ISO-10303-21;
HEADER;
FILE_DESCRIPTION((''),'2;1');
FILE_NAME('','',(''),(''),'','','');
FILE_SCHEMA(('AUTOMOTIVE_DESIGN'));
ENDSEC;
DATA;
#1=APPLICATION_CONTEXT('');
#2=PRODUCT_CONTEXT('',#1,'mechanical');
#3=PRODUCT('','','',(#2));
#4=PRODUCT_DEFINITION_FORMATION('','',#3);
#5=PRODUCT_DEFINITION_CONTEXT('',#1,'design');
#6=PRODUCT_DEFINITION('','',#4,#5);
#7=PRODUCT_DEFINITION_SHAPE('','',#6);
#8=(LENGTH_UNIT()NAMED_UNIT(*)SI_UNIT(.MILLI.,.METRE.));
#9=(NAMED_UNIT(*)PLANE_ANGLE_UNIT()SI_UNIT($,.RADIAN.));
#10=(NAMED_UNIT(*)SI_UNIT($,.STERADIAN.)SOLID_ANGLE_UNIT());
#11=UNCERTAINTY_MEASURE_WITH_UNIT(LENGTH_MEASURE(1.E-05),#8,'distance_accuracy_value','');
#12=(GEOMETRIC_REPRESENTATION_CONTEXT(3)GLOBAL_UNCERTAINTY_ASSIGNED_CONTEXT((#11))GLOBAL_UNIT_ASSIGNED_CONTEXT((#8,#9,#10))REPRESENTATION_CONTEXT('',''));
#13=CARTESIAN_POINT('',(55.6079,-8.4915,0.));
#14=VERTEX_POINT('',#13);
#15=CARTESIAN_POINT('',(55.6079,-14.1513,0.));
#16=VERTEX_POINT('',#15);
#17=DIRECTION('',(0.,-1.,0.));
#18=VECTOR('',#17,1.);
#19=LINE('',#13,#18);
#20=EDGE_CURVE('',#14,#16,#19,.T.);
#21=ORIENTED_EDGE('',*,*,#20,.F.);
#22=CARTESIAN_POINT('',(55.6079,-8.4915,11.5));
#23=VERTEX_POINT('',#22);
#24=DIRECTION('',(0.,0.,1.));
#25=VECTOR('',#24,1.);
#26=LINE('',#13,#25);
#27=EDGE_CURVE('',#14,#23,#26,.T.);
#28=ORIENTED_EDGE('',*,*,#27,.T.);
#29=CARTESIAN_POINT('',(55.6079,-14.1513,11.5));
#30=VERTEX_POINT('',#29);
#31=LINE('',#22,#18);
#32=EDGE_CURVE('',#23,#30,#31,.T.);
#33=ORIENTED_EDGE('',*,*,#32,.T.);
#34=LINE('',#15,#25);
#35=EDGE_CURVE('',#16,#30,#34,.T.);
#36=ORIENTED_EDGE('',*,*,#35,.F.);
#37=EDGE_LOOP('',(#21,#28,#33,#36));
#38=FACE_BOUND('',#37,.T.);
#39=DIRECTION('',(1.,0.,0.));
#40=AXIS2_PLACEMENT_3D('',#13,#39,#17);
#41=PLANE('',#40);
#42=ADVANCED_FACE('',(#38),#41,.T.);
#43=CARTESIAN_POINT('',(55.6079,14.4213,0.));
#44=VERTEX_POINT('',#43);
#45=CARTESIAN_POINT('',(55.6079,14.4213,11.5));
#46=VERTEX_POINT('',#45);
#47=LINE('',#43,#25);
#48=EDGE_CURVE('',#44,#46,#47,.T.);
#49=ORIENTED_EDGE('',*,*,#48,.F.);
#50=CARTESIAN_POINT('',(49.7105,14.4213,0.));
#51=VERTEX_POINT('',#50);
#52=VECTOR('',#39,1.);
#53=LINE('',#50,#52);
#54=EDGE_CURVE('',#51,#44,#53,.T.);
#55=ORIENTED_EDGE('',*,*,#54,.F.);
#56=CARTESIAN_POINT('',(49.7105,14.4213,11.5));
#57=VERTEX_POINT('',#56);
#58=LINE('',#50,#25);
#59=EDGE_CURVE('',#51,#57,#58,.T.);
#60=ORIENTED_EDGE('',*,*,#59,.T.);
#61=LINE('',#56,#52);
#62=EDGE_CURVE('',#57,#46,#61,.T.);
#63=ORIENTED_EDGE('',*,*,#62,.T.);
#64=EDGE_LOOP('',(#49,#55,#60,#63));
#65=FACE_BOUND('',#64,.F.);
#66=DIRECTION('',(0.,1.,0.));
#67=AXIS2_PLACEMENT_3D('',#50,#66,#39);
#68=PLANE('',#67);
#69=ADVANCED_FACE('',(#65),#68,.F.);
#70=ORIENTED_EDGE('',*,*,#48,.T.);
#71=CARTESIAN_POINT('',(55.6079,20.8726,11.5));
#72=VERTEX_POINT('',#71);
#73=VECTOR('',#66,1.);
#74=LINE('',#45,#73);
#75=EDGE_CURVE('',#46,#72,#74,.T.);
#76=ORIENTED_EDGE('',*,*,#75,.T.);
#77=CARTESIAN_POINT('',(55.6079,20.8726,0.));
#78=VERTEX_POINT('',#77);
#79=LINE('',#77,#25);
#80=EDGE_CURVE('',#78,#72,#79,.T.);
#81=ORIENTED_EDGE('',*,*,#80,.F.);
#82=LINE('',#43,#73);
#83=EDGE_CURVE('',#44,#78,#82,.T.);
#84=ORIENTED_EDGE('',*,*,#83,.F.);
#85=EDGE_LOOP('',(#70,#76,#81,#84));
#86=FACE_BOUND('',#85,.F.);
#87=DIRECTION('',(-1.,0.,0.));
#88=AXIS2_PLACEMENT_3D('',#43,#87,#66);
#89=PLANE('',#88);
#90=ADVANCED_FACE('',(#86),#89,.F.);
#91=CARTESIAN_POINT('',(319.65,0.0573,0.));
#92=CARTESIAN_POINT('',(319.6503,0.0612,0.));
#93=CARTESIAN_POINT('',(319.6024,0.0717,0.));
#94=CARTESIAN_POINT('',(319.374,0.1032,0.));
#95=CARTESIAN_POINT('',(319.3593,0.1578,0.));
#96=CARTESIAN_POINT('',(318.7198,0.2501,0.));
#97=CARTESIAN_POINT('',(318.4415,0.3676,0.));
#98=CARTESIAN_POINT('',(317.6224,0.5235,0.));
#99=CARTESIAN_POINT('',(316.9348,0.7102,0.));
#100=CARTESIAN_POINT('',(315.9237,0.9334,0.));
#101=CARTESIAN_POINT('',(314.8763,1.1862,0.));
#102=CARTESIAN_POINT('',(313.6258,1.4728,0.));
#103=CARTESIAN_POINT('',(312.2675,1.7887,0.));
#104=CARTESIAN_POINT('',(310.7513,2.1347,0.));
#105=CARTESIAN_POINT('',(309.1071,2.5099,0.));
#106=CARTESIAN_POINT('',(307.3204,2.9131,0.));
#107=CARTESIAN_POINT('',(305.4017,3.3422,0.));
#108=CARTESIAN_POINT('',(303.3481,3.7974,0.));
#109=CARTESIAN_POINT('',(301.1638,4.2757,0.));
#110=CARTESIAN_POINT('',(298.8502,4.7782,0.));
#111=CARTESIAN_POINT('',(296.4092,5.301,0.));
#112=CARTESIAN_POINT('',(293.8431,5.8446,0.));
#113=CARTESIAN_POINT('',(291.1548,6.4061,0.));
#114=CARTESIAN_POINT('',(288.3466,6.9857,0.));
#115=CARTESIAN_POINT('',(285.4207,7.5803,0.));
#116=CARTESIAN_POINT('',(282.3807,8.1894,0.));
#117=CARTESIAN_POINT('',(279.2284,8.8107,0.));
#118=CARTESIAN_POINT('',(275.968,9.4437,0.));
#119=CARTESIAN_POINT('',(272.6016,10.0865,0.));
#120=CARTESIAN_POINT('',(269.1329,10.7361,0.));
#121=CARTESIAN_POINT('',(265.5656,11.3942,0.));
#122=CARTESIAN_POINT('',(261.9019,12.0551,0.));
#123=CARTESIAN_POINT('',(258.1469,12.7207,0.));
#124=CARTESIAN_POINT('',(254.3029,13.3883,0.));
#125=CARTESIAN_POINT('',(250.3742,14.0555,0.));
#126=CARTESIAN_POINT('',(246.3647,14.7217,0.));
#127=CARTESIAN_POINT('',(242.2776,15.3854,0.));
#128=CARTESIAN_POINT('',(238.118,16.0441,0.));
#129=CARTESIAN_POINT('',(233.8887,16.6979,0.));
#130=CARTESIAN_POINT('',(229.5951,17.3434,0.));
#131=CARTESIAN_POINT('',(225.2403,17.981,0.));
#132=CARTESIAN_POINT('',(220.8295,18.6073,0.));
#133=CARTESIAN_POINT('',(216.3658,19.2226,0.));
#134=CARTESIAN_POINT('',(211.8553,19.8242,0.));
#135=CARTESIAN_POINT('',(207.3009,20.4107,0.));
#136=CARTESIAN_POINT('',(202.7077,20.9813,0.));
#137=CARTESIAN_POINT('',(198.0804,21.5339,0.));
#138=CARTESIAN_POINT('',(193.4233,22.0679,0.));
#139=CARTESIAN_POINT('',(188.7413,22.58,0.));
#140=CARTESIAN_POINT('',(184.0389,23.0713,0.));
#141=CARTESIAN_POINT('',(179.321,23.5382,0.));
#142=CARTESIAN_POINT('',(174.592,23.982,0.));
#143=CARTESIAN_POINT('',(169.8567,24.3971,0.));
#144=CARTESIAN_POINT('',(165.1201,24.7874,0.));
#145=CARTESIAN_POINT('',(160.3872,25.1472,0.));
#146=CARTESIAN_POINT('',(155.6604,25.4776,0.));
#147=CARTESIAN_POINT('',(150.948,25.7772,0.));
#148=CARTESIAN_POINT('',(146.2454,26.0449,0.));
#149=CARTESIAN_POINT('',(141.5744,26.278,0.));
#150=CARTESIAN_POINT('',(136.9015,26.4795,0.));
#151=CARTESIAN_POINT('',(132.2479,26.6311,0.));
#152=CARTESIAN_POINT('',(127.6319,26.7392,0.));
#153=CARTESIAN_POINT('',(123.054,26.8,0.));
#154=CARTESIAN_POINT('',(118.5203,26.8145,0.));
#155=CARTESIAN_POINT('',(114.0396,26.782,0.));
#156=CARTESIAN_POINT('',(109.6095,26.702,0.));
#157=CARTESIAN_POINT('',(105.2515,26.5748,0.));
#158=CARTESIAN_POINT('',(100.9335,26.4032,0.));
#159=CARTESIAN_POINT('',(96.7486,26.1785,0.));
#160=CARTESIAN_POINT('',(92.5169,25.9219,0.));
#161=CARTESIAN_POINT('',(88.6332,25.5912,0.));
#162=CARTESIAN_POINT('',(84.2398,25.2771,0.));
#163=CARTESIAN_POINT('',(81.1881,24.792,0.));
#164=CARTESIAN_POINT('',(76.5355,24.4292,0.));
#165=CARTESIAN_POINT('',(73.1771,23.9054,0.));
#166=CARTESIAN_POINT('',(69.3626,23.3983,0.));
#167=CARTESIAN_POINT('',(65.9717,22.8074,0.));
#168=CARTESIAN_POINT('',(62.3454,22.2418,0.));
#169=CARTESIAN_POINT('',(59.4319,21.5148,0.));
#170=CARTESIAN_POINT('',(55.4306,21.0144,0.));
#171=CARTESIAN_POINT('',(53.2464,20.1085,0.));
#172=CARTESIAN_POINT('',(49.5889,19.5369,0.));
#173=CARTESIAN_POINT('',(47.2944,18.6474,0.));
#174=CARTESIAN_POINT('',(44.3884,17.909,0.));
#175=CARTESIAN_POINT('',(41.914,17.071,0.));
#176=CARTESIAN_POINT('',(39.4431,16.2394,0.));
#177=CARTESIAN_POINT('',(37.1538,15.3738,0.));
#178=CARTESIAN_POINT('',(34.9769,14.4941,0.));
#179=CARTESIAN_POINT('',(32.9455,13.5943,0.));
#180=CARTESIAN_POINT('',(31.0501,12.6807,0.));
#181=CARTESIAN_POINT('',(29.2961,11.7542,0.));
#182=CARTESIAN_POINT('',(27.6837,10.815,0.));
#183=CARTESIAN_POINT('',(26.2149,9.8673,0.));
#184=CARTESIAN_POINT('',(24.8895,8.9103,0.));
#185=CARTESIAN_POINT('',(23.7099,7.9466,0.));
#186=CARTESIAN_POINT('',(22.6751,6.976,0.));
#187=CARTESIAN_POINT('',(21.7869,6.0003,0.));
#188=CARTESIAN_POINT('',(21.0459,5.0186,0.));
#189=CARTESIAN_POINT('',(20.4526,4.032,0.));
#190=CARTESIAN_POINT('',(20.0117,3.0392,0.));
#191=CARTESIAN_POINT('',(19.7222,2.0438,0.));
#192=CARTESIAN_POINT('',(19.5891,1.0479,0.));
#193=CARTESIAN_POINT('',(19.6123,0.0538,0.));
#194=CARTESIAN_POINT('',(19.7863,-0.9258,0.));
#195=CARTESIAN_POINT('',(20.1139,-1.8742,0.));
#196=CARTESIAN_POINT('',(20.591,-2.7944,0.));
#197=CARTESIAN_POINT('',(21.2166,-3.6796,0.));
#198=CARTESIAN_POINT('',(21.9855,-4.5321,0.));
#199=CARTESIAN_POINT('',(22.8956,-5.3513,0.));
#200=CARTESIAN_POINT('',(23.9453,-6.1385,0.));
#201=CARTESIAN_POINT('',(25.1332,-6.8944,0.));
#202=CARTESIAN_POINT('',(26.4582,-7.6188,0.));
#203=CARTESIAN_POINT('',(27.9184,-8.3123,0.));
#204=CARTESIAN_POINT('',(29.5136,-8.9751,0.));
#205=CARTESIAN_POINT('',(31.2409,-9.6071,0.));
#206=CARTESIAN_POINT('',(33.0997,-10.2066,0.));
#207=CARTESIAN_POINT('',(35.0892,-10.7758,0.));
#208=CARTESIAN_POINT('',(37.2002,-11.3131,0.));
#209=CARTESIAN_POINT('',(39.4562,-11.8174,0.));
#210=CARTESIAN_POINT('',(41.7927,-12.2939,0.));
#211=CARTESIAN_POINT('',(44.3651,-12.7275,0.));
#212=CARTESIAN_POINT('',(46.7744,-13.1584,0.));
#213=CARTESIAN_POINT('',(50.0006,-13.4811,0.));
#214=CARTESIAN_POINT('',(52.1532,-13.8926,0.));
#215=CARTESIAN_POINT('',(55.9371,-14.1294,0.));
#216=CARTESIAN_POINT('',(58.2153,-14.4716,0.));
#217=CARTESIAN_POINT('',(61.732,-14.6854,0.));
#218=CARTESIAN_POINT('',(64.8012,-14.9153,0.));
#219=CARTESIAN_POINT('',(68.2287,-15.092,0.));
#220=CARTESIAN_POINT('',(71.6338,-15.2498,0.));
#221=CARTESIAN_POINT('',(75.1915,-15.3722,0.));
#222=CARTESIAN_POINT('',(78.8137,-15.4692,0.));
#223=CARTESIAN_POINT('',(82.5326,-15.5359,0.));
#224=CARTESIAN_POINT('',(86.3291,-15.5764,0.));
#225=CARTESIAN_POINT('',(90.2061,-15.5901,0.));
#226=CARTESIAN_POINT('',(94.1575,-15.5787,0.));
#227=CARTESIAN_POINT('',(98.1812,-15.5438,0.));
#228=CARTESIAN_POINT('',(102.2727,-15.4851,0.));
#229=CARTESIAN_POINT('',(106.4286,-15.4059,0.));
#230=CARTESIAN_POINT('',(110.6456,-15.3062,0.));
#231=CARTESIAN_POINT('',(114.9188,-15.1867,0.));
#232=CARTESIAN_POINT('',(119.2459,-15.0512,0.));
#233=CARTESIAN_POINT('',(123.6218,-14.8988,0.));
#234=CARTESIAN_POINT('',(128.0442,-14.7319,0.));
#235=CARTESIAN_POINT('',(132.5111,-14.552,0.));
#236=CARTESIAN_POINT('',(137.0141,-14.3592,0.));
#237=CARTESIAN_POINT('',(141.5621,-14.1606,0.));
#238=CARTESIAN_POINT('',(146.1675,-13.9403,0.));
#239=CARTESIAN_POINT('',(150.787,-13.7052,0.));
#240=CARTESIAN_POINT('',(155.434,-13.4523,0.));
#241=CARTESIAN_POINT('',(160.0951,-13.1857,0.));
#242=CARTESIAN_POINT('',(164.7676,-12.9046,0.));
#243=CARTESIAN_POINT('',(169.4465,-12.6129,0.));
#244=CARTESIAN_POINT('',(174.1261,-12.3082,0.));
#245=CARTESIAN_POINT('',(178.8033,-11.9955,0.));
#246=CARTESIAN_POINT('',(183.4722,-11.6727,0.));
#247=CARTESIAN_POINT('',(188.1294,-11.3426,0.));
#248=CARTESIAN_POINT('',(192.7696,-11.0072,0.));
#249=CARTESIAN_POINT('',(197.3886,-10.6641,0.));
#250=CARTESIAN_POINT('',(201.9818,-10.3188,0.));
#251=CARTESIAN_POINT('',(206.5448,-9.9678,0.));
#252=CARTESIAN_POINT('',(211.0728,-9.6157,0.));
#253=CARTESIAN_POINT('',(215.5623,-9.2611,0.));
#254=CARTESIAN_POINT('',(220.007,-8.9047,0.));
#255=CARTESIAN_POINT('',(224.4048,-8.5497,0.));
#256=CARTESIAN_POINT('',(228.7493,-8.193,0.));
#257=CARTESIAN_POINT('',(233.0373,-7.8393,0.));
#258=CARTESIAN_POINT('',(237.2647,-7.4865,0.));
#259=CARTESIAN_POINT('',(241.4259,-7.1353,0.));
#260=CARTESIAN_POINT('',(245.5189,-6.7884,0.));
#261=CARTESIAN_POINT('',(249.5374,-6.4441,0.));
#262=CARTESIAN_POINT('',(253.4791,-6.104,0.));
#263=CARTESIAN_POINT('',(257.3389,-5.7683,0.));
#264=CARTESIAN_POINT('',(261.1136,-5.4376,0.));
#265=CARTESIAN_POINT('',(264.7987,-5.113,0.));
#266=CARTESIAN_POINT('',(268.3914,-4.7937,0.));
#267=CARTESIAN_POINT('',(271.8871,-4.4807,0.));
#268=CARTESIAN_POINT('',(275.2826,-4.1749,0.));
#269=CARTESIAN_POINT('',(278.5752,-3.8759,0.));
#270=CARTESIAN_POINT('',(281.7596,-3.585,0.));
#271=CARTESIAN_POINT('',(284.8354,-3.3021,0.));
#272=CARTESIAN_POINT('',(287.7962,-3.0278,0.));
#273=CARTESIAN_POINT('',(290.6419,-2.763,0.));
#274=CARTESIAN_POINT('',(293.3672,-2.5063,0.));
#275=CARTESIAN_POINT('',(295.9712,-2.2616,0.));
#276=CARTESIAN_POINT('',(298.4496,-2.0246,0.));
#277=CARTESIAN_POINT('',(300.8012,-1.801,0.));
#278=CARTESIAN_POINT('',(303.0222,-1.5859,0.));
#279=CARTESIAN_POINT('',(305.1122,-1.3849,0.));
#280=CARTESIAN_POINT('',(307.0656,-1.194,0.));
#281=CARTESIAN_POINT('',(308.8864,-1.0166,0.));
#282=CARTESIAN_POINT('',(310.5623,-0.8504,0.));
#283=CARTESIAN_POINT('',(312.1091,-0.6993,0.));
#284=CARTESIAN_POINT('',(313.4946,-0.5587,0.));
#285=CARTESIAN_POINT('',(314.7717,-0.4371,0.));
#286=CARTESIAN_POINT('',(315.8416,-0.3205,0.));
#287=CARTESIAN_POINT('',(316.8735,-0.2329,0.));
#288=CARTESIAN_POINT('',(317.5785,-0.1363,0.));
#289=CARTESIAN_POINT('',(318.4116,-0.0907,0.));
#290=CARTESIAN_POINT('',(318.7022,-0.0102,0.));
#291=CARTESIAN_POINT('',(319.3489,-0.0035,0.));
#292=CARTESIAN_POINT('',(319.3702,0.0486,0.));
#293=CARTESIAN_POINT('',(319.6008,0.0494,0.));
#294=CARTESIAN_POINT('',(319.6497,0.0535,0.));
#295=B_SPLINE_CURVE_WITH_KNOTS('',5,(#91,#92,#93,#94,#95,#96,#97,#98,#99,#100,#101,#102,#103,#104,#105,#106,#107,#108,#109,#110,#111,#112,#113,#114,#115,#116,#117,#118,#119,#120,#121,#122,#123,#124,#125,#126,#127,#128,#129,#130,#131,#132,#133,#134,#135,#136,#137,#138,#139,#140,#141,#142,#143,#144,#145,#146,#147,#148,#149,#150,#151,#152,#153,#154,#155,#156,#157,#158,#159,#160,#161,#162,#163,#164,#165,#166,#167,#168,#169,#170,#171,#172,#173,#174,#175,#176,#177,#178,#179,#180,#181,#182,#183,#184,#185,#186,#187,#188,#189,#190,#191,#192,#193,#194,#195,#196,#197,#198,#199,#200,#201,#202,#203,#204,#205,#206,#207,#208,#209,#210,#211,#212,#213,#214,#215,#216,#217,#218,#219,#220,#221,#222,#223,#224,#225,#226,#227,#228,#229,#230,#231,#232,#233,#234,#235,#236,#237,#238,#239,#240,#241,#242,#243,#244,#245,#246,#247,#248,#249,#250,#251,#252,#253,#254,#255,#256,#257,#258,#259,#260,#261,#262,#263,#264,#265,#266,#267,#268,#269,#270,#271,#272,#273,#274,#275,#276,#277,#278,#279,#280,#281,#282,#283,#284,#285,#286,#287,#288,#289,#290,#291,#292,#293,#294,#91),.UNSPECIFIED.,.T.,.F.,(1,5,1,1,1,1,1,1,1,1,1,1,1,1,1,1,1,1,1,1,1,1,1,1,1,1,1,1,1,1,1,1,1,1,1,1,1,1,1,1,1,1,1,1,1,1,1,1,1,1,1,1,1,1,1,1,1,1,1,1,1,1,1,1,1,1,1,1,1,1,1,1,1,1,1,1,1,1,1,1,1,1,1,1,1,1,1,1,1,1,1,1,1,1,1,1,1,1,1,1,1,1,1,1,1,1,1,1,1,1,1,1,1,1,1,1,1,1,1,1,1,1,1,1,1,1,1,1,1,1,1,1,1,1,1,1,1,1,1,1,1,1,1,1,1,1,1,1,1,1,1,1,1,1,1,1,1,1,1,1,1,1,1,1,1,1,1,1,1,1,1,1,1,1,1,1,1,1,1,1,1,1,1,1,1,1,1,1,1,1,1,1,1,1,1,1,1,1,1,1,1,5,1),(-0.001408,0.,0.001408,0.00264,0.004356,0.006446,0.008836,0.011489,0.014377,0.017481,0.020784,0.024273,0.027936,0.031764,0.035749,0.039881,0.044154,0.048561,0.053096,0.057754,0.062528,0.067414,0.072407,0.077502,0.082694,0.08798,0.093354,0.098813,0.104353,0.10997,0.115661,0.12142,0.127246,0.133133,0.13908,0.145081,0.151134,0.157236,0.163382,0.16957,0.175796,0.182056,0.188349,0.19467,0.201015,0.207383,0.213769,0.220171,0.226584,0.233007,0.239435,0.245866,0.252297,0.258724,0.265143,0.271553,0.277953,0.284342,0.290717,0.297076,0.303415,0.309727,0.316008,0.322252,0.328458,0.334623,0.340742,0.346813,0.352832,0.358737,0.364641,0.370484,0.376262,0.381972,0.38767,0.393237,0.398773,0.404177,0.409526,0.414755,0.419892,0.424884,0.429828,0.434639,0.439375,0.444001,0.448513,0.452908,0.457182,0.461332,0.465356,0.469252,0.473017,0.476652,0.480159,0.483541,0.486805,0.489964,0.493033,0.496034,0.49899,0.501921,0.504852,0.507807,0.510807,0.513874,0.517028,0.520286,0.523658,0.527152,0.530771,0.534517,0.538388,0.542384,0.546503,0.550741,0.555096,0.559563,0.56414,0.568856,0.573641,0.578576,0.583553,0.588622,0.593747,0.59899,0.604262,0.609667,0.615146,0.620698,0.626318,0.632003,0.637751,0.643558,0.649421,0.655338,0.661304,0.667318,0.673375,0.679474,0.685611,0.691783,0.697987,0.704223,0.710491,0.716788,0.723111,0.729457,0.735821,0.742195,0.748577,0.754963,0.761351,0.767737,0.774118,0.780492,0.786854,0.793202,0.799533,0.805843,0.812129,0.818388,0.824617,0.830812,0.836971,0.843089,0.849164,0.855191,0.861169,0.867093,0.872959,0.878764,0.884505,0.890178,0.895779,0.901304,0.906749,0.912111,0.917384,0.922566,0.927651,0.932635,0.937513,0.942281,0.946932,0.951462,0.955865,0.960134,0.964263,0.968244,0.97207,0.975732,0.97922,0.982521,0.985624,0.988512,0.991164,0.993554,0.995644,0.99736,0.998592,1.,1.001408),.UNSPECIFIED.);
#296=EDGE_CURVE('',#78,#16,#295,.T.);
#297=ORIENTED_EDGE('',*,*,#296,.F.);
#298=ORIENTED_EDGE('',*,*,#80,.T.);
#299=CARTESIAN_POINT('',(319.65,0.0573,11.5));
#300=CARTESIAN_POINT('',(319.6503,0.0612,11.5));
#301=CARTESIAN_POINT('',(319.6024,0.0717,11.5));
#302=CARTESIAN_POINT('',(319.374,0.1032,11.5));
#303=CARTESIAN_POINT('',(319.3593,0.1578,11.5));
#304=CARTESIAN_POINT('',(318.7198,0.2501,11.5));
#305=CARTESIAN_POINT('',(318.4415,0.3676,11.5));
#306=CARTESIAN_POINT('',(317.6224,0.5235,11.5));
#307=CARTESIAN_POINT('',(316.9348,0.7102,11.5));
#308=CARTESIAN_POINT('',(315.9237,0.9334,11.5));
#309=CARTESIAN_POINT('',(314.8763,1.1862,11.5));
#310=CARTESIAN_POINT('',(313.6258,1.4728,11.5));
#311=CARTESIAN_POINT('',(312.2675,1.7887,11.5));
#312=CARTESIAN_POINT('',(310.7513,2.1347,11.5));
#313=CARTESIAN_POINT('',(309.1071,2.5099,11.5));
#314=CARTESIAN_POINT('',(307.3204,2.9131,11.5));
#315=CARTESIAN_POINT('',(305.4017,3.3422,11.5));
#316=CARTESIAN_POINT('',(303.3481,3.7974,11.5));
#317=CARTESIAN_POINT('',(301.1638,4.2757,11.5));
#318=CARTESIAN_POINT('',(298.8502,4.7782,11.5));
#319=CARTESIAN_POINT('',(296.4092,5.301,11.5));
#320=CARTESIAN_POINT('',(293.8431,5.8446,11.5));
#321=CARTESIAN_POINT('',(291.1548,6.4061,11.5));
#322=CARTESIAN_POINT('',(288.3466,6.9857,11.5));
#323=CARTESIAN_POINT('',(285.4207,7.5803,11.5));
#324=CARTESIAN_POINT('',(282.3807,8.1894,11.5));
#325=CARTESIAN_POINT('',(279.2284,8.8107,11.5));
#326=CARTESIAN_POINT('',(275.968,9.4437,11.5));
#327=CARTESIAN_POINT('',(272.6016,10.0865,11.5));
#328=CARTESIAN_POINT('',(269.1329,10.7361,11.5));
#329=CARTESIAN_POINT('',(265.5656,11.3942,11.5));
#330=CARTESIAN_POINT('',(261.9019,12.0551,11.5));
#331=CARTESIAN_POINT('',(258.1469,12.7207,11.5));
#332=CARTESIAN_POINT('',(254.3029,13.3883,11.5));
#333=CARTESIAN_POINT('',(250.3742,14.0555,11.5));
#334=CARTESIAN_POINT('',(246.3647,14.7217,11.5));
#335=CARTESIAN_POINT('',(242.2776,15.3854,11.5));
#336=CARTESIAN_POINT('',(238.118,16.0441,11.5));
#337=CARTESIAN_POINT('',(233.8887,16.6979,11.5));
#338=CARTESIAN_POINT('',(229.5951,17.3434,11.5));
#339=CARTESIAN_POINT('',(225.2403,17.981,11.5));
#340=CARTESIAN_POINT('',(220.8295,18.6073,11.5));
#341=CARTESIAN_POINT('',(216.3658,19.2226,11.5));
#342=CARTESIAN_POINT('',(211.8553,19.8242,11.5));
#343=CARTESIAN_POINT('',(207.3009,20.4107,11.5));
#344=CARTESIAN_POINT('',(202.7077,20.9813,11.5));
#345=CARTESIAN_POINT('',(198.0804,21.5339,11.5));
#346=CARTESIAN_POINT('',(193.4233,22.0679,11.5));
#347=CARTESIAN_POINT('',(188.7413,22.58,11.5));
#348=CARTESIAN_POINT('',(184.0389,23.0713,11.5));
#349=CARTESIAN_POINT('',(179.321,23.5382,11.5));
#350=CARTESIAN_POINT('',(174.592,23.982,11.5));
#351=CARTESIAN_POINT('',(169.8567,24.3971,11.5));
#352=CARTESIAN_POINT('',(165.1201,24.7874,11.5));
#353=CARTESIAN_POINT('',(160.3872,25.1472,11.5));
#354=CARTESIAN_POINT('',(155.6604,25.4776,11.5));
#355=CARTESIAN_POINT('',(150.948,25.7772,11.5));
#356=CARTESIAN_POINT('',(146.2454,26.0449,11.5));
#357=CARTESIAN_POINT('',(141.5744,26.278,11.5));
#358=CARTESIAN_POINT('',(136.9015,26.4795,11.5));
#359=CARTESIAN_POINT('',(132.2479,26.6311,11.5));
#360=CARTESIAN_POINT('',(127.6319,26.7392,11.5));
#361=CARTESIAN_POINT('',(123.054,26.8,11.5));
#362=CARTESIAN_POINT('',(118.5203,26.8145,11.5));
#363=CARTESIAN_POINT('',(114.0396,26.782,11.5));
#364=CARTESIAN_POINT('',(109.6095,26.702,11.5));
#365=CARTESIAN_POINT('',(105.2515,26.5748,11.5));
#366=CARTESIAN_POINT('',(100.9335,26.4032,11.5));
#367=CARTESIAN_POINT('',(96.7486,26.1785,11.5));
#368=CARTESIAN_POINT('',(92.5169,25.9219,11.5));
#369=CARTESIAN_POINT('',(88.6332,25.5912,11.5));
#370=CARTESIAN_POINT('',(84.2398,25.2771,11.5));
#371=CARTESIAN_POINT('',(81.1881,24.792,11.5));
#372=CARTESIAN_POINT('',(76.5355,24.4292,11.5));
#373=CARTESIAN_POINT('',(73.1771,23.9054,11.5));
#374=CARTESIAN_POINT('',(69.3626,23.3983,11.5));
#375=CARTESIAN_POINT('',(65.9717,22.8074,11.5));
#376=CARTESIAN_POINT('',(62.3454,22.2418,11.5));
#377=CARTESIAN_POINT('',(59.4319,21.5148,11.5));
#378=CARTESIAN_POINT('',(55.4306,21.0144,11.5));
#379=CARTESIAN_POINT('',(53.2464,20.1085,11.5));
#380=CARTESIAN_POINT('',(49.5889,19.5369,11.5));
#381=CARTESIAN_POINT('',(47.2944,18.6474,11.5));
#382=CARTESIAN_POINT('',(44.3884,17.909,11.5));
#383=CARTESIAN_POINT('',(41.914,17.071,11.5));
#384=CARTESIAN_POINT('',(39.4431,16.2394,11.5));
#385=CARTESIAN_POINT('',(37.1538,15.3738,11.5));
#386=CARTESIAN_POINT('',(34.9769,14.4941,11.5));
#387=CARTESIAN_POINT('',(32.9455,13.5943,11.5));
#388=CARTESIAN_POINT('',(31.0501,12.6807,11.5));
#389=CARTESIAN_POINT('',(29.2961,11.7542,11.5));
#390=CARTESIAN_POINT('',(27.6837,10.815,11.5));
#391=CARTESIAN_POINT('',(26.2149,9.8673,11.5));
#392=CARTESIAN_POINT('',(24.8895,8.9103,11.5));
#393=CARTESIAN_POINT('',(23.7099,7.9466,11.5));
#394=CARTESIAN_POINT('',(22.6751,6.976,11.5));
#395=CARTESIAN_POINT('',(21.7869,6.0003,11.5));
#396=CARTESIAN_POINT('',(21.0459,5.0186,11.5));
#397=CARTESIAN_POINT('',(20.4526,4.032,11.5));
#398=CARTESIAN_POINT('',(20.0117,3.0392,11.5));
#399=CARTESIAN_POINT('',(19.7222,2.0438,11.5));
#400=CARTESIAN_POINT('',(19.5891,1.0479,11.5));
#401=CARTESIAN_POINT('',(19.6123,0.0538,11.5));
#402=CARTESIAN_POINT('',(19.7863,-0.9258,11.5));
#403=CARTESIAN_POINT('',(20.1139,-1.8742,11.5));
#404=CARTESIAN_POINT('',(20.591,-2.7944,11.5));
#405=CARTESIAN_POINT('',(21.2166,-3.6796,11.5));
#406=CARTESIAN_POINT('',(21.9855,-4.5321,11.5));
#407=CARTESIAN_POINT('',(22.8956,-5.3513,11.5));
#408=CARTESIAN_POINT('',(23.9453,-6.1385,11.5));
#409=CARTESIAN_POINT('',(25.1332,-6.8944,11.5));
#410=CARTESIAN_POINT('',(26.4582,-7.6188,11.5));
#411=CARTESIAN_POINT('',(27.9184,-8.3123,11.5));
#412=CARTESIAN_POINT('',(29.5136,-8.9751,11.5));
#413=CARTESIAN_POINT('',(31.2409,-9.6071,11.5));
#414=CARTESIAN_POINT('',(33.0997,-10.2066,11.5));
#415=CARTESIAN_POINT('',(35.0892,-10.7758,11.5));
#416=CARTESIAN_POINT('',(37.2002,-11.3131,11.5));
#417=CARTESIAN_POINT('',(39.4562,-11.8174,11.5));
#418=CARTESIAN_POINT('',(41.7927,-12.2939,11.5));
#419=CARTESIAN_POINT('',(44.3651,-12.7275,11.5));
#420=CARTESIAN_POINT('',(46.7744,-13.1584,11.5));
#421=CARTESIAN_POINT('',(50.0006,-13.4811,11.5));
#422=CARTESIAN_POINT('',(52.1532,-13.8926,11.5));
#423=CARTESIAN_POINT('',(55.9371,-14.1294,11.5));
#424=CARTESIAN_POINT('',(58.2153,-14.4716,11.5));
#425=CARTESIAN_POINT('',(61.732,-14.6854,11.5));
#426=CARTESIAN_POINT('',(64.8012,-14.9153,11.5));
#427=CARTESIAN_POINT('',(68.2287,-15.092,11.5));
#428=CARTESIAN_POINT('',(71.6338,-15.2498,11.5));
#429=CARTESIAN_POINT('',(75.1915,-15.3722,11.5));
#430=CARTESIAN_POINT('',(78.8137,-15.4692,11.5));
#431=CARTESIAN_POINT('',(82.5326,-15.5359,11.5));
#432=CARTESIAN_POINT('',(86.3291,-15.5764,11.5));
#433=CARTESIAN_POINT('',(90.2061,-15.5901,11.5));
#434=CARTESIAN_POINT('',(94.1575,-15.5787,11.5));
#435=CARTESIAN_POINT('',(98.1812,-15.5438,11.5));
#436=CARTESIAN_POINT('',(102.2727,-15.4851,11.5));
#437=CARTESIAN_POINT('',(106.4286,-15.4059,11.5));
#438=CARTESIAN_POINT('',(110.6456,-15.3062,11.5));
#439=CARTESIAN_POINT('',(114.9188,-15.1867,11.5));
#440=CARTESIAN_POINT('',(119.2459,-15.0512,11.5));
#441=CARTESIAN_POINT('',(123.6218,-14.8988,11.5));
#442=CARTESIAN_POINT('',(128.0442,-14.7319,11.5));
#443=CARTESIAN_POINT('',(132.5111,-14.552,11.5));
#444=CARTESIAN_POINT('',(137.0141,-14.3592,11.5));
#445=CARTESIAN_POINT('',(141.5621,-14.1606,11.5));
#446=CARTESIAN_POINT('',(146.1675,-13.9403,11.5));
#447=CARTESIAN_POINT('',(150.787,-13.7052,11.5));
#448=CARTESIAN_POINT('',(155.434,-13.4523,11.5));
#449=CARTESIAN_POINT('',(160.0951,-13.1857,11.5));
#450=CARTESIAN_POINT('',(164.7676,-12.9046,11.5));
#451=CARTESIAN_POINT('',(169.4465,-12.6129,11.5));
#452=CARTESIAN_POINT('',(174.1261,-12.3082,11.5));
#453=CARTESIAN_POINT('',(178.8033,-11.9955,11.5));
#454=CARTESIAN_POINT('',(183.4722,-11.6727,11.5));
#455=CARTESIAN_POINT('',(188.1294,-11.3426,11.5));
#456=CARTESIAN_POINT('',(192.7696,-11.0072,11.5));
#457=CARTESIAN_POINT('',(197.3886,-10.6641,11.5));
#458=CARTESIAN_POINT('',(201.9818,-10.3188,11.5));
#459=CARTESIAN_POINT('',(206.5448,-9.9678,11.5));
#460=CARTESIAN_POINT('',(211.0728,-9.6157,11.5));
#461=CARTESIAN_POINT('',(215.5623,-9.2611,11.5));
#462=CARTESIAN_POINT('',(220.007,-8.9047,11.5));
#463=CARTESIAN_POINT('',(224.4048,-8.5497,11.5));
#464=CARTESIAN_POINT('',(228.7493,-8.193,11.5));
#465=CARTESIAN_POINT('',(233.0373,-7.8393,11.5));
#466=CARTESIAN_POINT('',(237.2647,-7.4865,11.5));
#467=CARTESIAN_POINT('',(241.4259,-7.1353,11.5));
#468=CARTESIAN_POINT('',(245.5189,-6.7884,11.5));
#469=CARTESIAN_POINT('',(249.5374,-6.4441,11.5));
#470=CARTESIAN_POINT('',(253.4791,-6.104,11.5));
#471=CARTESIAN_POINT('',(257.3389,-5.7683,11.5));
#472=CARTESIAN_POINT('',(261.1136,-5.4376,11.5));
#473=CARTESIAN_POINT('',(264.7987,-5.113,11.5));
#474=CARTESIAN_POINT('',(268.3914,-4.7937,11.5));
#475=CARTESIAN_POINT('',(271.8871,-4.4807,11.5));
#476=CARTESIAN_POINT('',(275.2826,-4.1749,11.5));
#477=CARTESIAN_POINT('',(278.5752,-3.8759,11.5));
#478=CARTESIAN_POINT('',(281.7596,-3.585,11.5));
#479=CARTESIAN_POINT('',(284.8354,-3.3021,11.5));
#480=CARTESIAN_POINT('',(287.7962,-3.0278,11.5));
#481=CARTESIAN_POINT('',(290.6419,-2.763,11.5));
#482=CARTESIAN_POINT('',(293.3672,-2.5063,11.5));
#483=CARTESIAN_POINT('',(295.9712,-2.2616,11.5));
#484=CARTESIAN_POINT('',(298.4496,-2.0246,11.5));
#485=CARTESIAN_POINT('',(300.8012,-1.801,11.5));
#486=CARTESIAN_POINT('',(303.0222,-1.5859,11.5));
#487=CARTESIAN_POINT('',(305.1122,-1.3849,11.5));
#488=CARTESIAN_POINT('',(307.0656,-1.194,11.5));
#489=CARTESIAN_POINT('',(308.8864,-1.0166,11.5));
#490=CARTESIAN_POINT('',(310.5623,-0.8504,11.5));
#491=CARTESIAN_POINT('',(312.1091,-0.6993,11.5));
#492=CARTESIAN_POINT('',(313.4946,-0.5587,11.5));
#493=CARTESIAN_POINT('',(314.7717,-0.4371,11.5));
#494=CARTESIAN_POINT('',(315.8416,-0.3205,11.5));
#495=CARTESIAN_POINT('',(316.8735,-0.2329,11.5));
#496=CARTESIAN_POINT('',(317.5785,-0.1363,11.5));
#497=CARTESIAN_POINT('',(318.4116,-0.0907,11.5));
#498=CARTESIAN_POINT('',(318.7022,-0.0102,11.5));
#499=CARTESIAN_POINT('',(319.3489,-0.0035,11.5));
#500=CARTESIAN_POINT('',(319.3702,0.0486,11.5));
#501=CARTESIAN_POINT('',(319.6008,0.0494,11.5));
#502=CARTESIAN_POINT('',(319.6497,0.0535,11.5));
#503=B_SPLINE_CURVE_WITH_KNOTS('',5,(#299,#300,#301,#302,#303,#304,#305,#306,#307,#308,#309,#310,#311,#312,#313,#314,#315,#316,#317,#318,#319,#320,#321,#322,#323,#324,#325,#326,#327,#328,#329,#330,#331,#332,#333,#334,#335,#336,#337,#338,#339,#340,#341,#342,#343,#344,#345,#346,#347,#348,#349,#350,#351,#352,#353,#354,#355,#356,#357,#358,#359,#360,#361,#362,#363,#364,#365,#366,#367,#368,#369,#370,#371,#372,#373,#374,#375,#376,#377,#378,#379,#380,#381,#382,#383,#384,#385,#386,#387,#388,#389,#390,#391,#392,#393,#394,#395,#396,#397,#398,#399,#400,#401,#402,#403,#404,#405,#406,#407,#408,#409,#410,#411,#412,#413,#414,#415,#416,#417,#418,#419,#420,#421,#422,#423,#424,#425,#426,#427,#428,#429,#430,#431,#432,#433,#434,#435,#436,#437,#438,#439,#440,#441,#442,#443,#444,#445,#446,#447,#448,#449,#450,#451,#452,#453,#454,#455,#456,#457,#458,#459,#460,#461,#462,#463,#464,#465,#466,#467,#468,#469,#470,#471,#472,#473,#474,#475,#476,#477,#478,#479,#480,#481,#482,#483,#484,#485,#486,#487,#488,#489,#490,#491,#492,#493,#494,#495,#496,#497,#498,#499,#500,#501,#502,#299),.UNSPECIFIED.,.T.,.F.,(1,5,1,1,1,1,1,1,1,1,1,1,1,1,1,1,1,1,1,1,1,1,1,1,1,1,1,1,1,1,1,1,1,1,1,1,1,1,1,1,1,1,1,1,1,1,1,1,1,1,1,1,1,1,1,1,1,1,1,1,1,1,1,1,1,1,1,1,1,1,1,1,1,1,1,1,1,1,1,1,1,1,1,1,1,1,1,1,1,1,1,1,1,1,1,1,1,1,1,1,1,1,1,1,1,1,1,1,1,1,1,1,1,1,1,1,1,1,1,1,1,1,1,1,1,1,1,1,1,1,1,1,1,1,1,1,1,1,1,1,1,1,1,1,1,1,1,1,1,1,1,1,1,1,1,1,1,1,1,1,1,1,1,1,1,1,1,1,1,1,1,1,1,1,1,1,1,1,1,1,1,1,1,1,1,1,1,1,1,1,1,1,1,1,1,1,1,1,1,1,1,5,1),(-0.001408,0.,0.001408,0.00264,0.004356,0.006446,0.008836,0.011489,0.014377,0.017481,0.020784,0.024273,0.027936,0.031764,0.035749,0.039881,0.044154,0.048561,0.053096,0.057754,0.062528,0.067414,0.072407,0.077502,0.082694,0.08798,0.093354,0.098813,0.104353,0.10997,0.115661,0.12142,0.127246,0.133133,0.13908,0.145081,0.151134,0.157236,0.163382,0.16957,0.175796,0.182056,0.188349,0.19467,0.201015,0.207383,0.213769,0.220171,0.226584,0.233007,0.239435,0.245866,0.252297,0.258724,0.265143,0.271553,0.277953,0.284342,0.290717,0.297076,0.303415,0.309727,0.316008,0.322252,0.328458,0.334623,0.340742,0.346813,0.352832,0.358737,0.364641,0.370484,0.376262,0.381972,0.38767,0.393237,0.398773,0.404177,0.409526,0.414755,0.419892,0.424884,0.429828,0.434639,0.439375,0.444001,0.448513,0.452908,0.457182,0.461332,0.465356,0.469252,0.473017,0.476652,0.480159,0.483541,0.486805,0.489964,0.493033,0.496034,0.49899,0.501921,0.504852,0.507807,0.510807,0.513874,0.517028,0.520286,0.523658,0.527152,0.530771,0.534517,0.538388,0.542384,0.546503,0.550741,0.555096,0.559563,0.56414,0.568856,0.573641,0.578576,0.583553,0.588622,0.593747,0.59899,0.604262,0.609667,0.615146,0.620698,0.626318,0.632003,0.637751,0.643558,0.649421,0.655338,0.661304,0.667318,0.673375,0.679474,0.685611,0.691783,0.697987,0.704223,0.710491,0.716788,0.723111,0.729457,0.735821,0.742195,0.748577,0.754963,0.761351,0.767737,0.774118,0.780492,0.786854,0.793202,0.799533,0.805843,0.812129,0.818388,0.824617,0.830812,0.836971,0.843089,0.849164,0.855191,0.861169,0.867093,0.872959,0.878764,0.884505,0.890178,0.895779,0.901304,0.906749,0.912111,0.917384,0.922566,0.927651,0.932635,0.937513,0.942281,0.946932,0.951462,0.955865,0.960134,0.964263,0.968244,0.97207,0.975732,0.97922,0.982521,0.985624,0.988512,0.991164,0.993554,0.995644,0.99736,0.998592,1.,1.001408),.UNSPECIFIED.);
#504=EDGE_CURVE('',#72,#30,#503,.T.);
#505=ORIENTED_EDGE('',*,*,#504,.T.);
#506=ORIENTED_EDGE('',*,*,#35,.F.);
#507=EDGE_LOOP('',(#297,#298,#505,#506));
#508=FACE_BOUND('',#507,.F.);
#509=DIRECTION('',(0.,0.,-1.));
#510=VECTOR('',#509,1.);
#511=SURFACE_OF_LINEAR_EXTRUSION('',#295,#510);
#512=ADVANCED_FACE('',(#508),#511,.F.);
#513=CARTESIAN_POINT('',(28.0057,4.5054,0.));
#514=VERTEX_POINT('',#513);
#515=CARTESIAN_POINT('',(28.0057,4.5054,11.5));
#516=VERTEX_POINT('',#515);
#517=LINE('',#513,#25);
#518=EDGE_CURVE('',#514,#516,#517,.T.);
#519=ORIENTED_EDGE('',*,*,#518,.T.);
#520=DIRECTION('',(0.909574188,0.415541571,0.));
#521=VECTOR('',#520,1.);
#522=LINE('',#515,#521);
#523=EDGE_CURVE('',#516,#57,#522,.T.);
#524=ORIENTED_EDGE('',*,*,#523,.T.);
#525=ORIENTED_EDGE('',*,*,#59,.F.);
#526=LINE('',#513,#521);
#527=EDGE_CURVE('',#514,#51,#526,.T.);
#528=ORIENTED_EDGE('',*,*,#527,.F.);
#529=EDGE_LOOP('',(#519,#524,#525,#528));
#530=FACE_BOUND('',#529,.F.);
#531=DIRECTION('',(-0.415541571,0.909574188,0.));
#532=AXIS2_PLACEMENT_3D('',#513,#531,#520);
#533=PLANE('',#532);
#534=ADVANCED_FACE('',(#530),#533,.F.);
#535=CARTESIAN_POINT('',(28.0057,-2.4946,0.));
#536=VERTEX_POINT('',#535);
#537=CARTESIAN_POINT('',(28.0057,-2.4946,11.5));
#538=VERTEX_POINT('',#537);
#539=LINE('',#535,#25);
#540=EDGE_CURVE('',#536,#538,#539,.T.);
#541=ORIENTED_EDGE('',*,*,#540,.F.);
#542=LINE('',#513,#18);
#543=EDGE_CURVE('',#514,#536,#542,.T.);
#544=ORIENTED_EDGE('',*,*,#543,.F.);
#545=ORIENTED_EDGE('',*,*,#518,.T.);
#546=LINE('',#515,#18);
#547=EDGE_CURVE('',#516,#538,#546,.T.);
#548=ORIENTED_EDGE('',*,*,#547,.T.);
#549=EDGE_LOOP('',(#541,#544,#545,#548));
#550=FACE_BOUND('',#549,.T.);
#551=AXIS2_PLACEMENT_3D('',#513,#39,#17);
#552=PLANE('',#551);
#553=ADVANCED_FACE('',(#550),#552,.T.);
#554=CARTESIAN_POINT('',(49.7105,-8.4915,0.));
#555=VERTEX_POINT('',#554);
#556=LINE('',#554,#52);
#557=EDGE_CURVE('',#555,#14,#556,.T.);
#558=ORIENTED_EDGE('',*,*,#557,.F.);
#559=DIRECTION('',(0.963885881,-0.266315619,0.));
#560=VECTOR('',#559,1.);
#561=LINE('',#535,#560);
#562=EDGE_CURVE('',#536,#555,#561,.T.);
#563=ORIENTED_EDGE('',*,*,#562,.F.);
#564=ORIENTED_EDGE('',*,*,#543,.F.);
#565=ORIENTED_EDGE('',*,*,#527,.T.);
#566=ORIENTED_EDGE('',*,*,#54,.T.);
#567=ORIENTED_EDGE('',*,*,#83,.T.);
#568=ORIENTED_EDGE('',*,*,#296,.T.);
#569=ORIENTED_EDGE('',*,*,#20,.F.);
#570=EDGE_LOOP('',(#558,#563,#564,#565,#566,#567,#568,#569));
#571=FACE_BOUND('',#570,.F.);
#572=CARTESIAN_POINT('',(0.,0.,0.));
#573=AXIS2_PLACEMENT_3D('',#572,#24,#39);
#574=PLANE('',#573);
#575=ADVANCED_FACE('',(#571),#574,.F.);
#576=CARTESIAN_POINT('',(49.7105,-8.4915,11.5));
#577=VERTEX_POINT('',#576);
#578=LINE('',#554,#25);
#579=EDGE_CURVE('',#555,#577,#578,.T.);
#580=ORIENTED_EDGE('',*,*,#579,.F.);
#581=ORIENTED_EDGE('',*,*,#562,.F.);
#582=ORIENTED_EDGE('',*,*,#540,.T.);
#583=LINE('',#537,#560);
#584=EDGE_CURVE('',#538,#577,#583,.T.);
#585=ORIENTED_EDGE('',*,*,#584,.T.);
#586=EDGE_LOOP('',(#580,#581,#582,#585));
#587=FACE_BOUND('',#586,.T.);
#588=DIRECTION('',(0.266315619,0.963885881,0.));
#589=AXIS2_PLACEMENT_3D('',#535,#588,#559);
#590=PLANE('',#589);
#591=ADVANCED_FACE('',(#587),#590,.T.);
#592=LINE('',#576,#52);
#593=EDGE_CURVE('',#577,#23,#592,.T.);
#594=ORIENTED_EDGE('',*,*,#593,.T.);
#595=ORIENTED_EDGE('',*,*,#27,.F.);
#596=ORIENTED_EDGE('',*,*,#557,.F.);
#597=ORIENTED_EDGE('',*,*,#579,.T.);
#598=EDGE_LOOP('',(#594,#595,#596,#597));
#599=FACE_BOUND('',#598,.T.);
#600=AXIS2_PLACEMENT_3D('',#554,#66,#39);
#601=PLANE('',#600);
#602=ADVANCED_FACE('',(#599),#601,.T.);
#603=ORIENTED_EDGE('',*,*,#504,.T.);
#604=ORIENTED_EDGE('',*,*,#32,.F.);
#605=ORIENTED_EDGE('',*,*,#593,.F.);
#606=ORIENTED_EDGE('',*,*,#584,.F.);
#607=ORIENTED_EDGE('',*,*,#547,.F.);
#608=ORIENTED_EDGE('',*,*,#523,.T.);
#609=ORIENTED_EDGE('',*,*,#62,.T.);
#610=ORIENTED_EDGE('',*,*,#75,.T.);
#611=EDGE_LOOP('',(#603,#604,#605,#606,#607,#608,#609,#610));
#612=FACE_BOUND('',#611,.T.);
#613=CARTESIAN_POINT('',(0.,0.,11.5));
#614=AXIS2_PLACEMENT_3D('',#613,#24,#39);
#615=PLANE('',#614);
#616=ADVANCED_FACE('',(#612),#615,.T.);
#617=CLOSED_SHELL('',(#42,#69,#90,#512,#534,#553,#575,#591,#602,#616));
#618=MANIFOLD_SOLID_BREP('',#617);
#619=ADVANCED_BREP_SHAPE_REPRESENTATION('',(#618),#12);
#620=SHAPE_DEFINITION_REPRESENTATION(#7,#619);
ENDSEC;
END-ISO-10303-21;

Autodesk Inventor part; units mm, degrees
ref_plane "YZ Plane" through (0, 0, 0) normal (1, 0, 0) x (0, 1, 0)
ref_plane "XZ Plane" through (0, 0, 0) normal (0, 1, 0) x (-1, 0, 0)
ref_plane "XY Plane" through (0, 0, 0) normal (0, 0, 1) x (1, 0, 0)
sketch "Sketch2" plane through (0, 0, 0) normal (0, 0, 1) x (1, 0, 0)
  spline S0 degree 5 poles (319.65, 0.0573) (319.6503, 0.0612) (319.6024, 0.0717) (319.374, 0.1032) (319.3593, 0.1578) (318.7198, 0.2501) (318.4415, 0.3676) (317.6224, 0.5235) (316.9348, 0.7102) (315.9237, 0.9334) (314.8763, 1.1862) (313.6258, 1.4728) (312.2675, 1.7887) (310.7513, 2.1347) (309.1071, 2.5099) (307.3204, 2.9131) (305.4017, 3.3422) (303.3481, 3.7974) (301.1638, 4.2757) (298.8502, 4.7782) (296.4092, 5.301) (293.8431, 5.8446) (291.1548, 6.4061) (288.3466, 6.9857) (285.4207, 7.5803) (282.3807, 8.1894) (279.2284, 8.8107) (275.968, 9.4437) (272.6016, 10.0865) (269.1329, 10.7361) (265.5656, 11.3942) (261.9019, 12.0551) (258.1469, 12.7207) (254.3029, 13.3883) (250.3742, 14.0555) (246.3647, 14.7217) (242.2776, 15.3854) (238.118, 16.0441) (233.8887, 16.6979) (229.5951, 17.3434) (225.2403, 17.981) (220.8295, 18.6073) (216.3658, 19.2226) (211.8553, 19.8242) (207.3009, 20.4107) (202.7077, 20.9813) (198.0804, 21.5339) (193.4233, 22.0679) (188.7413, 22.58) (184.0389, 23.0713) (179.321, 23.5382) (174.592, 23.982) (169.8567, 24.3971) (165.1201, 24.7874) (160.3872, 25.1472) (155.6604, 25.4776) (150.948, 25.7772) (146.2454, 26.0449) (141.5744, 26.278) (136.9015, 26.4795) (132.2479, 26.6311) (127.6319, 26.7392) (123.054, 26.8) (118.5203, 26.8145) (114.0396, 26.782) (109.6095, 26.702) (105.2515, 26.5748) (100.9335, 26.4032) (96.7486, 26.1785) (92.5169, 25.9219) (88.6332, 25.5912) (84.2398, 25.2771) (81.1881, 24.792) (76.5355, 24.4292) (73.1771, 23.9054) (69.3626, 23.3983) (65.9717, 22.8074) (62.3454, 22.2418) (59.4319, 21.5148) (55.4306, 21.0144) (53.2464, 20.1085) (49.5889, 19.5369) (47.2944, 18.6474) (44.3884, 17.909) (41.914, 17.071) (39.4431, 16.2394) (37.1538, 15.3738) (34.9769, 14.4941) (32.9455, 13.5943) (31.0501, 12.6807) (29.2961, 11.7542) (27.6837, 10.815) (26.2149, 9.8673) (24.8895, 8.9103) (23.7099, 7.9466) (22.6751, 6.976) (21.7869, 6.0003) (21.0459, 5.0186) (20.4526, 4.032) (20.0117, 3.0392) (19.7222, 2.0438) (19.5891, 1.0479) (19.6123, 0.0538) (19.7863, -0.9258) (20.1139, -1.8742) (20.591, -2.7944) (21.2166, -3.6796) (21.9855, -4.5321) (22.8956, -5.3513) (23.9453, -6.1385) (25.1332, -6.8944) (26.4582, -7.6188) (27.9184, -8.3123) (29.5136, -8.9751) (31.2409, -9.6071) (33.0997, -10.2066) (35.0892, -10.7758) (37.2002, -11.3131) (39.4562, -11.8174) (41.7927, -12.2939) (44.3651, -12.7275) (46.7744, -13.1584) (50.0006, -13.4811) (52.1532, -13.8926) (55.9371, -14.1294) (58.2153, -14.4716) (61.732, -14.6854) (64.8012, -14.9153) (68.2287, -15.092) (71.6338, -15.2498) (75.1915, -15.3722) (78.8137, -15.4692) (82.5326, -15.5359) (86.3291, -15.5764) (90.2061, -15.5901) (94.1575, -15.5787) (98.1812, -15.5438) (102.2727, -15.4851) (106.4286, -15.4059) (110.6456, -15.3062) (114.9188, -15.1867) (119.2459, -15.0512) (123.6218, -14.8988) (128.0442, -14.7319) (132.5111, -14.552) (137.0141, -14.3592) (141.5621, -14.1606) (146.1675, -13.9403) (150.787, -13.7052) (155.434, -13.4523) (160.0951, -13.1857) (164.7676, -12.9046) (169.4465, -12.6129) (174.1261, -12.3082) (178.8033, -11.9955) (183.4722, -11.6727) (188.1294, -11.3426) (192.7696, -11.0072) (197.3886, -10.6641) (201.9818, -10.3188) (206.5448, -9.9678) (211.0728, -9.6157) (215.5623, -9.2611) (220.007, -8.9047) (224.4048, -8.5497) (228.7493, -8.193) (233.0373, -7.8393) (237.2647, -7.4865) (241.4259, -7.1353) (245.5189, -6.7884) (249.5374, -6.4441) (253.4791, -6.104) (257.3389, -5.7683) (261.1136, -5.4376) (264.7987, -5.113) (268.3914, -4.7937) (271.8871, -4.4807) (275.2826, -4.1749) (278.5752, -3.8759) (281.7596, -3.585) (284.8354, -3.3021) (287.7962, -3.0278) (290.6419, -2.763) (293.3672, -2.5063) (295.9712, -2.2616) (298.4496, -2.0246) (300.8012, -1.801) (303.0222, -1.5859) (305.1122, -1.3849) (307.0656, -1.194) (308.8864, -1.0166) (310.5623, -0.8504) (312.1091, -0.6993) (313.4946, -0.5587) (314.7717, -0.4371) (315.8416, -0.3205) (316.8735, -0.2329) (317.5785, -0.1363) (318.4116, -0.0907) (318.7022, -0.0102) (319.3489, -0.0035) (319.3702, 0.0486) (319.6008, 0.0494) (319.6497, 0.0535) (319.65, 0.0573) knots 0 0 0 0 0 0 0.001408 0.00264 0.004356 0.006446 0.008836 0.011489 0.014377 0.017481 0.020784 0.024273 0.027936 0.031764 0.035749 0.039881 0.044154 0.048561 0.053096 0.057754 0.062528 0.067414 0.072407 0.077502 0.082694 0.08798 0.093354 0.098813 0.104353 0.10997 0.115661 0.12142 0.127246 0.133133 0.13908 0.145081 0.151134 0.157236 0.163382 0.16957 0.175796 0.182056 0.188349 0.19467 0.201015 0.207383 0.213769 0.220171 0.226584 0.233007 0.239435 0.245866 0.252297 0.258724 0.265143 0.271553 0.277953 0.284342 0.290717 0.297076 0.303415 0.309727 0.316008 0.322252 0.328458 0.334623 0.340742 0.346813 0.352832 0.358737 0.364641 0.370484 0.376262 0.381972 0.38767 0.393237 0.398773 0.404177 0.409526 0.414755 0.419892 0.424884 0.429828 0.434639 0.439375 0.444001 0.448513 0.452908 0.457182 0.461332 0.465356 0.469252 0.473017 0.476652 0.480159 0.483541 0.486805 0.489964 0.493033 0.496034 0.49899 0.501921 0.504852 0.507807 0.510807 0.513874 0.517028 0.520286 0.523658 0.527152 0.530771 0.534517 0.538388 0.542384 0.546503 0.550741 0.555096 0.559563 0.56414 0.568856 0.573641 0.578576 0.583553 0.588622 0.593747 0.59899 0.604262 0.609667 0.615146 0.620698 0.626318 0.632003 0.637751 0.643558 0.649421 0.655338 0.661304 0.667318 0.673375 0.679474 0.685611 0.691783 0.697987 0.704223 0.710491 0.716788 0.723111 0.729457 0.735821 0.742195 0.748577 0.754963 0.761351 0.767737 0.774118 0.780492 0.786854 0.793202 0.799533 0.805843 0.812129 0.818388 0.824617 0.830812 0.836971 0.843089 0.849164 0.855191 0.861169 0.867093 0.872959 0.878764 0.884505 0.890178 0.895779 0.901304 0.906749 0.912111 0.917384 0.922566 0.927651 0.932635 0.937513 0.942281 0.946932 0.951462 0.955865 0.960134 0.964263 0.968244 0.97207 0.975732 0.97922 0.982521 0.985624 0.988512 0.991164 0.993554 0.995644 0.99736 0.998592 1 1 1 1 1 1
  circle A0 centre (80.6499, 4.6494) radius 14
  line L0 (80.6499, 4.6494) -> (80.6499, 24.7974) construction
  circle A1 centre (209.65, 4.6494) radius 4.2
  line L1 (80.6499, 4.6494) -> (209.65, 4.6494) construction
  line L2 (319.65, 0.0573) -> (219.65, 0.0573) construction
  line L3 (219.65, 18.7671) -> (219.65, -8.9327) construction
  line L4 (28.0057, 4.5054) -> (28.0057, -2.4946)
  line L5 (19.6271, 1.0326) -> (319.65, 0.0573) construction
  line L6 (49.7105, 14.4213) -> (55.6079, 14.4213)
  line L7 (49.7105, -8.4915) -> (55.6079, -8.4915)
  line L8 (28.0057, 4.5054) -> (49.7105, 14.4213)
  line L9 (28.0057, -2.4946) -> (49.7105, -8.4915)
  line L10 (55.6079, 14.4213) -> (55.6079, 20.8726)
  line L11 (55.6079, -8.4915) -> (55.6079, -14.1513)
  point P0 (0, 0)
  point P1 (319.3571, 0.1272)
  point P2 (318.9917, 0.2142)
  point P3 (318.4802, 0.3354)
  point P4 (317.8238, 0.4911)
  point P5 (317.0222, 0.6801)
  point P6 (316.0769, 0.9024)
  point P7 (314.9885, 1.1568)
  point P8 (313.7582, 1.443)
  point P9 (312.3866, 1.7598)
  point P10 (310.8752, 2.1063)
  point P11 (309.2258, 2.4819)
  point P12 (307.4393, 2.8854)
  point P13 (305.5178, 3.3153)
  point P14 (303.4628, 3.7707)
  point P15 (301.2764, 4.2501)
  point P16 (298.9607, 4.7526)
  point P17 (296.5175, 5.2764)
  point P18 (293.9492, 5.8203)
  point P19 (291.2585, 6.3828)
  point P20 (288.4478, 6.9627)
  point P21 (285.5195, 7.5582)
  point P22 (282.4766, 8.1678)
  point P23 (279.3218, 8.79)
  point P24 (276.0584, 9.4236)
  point P25 (272.6891, 10.0668)
  point P26 (269.2175, 10.7178)
  point P27 (265.6469, 11.3757)
  point P28 (261.9803, 12.0381)
  point P29 (258.2219, 12.7041)
  point P30 (254.3747, 13.3722)
  point P31 (250.4426, 14.0403)
  point P32 (246.4295, 14.7072)
  point P33 (242.339, 15.3714)
  point P34 (238.1756, 16.0311)
  point P35 (233.9429, 16.6851)
  point P36 (229.6454, 17.3316)
  point P37 (225.287, 17.9694)
  point P38 (220.8722, 18.5967)
  point P39 (216.4049, 19.2123)
  point P40 (211.8902, 19.8144)
  point P41 (207.332, 20.4015)
  point P42 (202.7348, 20.9724)
  point P43 (198.1034, 21.5256)
  point P44 (193.4423, 22.0596)
  point P45 (188.7563, 22.5726)
  point P46 (184.0499, 23.0637)
  point P47 (179.3279, 23.5314)
  point P48 (174.5948, 23.9745)
  point P49 (169.8554, 24.3909)
  point P50 (165.1148, 24.7803)
  point P51 (160.3775, 25.1406)
  point P52 (155.648, 25.4709)
  point P53 (150.9317, 25.7703)
  point P54 (146.2331, 26.0373)
  point P55 (141.557, 26.2707)
  point P56 (136.8821, 26.4681)
  point P57 (132.221, 26.6211)
  point P58 (127.5965, 26.7282)
  point P59 (123.0134, 26.7888)
  point P60 (118.4762, 26.8026)
  point P61 (113.9903, 26.7693)
  point P62 (109.5602, 26.6886)
  point P63 (105.191, 26.5611)
  point P64 (100.8866, 26.3865)
  point P65 (96.6524, 26.1648)
  point P66 (92.4926, 25.8972)
  point P67 (88.4117, 25.5837)
  point P68 (84.4142, 25.2255)
  point P69 (80.8999, 24.8247)
  point P70 (76.6859, 24.3774)
  point P71 (72.9632, 23.8899)
  point P72 (69.3401, 23.3613)
  point P73 (65.8208, 22.7937)
  point P74 (62.4086, 22.1883)
  point P75 (59.1071, 21.5463)
  point P76 (52.8494, 20.1606)
  point P77 (49.7105, 19.4213)
  point P78 (47.0738, 18.6507)
  point P79 (44.3741, 17.8542)
  point P80 (41.8034, 17.0322)
  point P81 (39.3638, 16.1874)
  point P82 (37.0583, 15.3213)
  point P83 (34.8884, 14.4363)
  point P84 (32.8568, 13.5339)
  point P85 (30.965, 12.6165)
  point P86 (29.2145, 11.6859)
  point P87 (27.6071, 10.7436)
  point P88 (26.1443, 9.792)
  point P89 (24.827, 8.8323)
  point P90 (23.6567, 7.8663)
  point P91 (22.6337, 6.8952)
  point P92 (21.7592, 5.9208)
  point P93 (21.0335, 4.944)
  point P94 (20.4572, 3.966)
  point P95 (20.0309, 2.9874)
  point P96 (19.754, 2.0097)
  point P97 (19.6499, 0.0573)
  point P98 (19.8206, -0.9033)
  point P99 (20.1377, -1.8357)
  point P100 (20.6003, -2.7402)
  point P101 (21.2081, -3.6159)
  point P102 (21.9599, -4.4628)
  point P103 (22.8545, -5.2806)
  point P104 (23.891, -6.069)
  point P105 (25.0682, -6.8277)
  point P106 (26.3846, -7.5561)
  point P107 (27.8384, -8.2539)
  point P108 (29.4284, -8.9211)
  point P109 (31.1522, -9.5571)
  point P110 (33.0086, -10.1613)
  point P111 (34.9949, -10.734)
  point P112 (37.1093, -11.2746)
  point P113 (39.3497, -11.7828)
  point P114 (41.7134, -12.2586)
  point P115 (44.198, -12.702)
  point P116 (46.8014, -13.1127)
  point P117 (49.7105, -13.4915)
  point P118 (52.3532, -13.8357)
  point P119 (58.3469, -14.4294)
  point P120 (61.5023, -14.6781)
  point P121 (64.7591, -14.8953)
  point P122 (68.1149, -15.0813)
  point P123 (71.5661, -15.237)
  point P124 (75.1094, -15.3627)
  point P125 (78.7418, -15.4596)
  point P126 (82.46, -15.528)
  point P127 (86.2607, -15.5691)
  point P128 (90.14, -15.5838)
  point P129 (94.0946, -15.5733)
  point P130 (98.1212, -15.5388)
  point P131 (102.2159, -15.4812)
  point P132 (106.3751, -15.4023)
  point P133 (110.5952, -15.303)
  point P134 (114.872, -15.1845)
  point P135 (119.2022, -15.0489)
  point P136 (123.5813, -14.8971)
  point P137 (128.006, -14.7306)
  point P138 (132.4718, -14.5509)
  point P139 (136.9748, -14.3598)
  point P140 (141.5285, -14.1576)
  point P141 (146.1365, -13.9383)
  point P142 (150.7679, -13.7022)
  point P143 (155.4191, -13.4499)
  point P144 (160.0853, -13.1829)
  point P145 (164.7617, -12.9024)
  point P146 (169.4444, -12.6099)
  point P147 (174.1283, -12.306)
  point P148 (178.8092, -11.9925)
  point P149 (183.4823, -11.67)
  point P150 (188.1434, -11.34)
  point P151 (192.7877, -11.0037)
  point P152 (197.4107, -10.6614)
  point P153 (202.0079, -10.3149)
  point P154 (206.5748, -9.9645)
  point P155 (211.1069, -9.6117)
  point P156 (215.6, -9.2568)
  point P157 (220.049, -8.9007)
  point P158 (224.4503, -8.5446)
  point P159 (228.7988, -8.1885)
  point P160 (233.0906, -7.8339)
  point P161 (237.3215, -7.4808)
  point P162 (241.4867, -7.1298)
  point P163 (245.5829, -6.7821)
  point P164 (249.6053, -6.4377)
  point P165 (253.5503, -6.0972)
  point P166 (257.4137, -5.7612)
  point P167 (261.1916, -5.4303)
  point P168 (264.8801, -5.1051)
  point P169 (268.4759, -4.7856)
  point P170 (271.9748, -4.4724)
  point P171 (275.3735, -4.1661)
  point P172 (278.6687, -3.867)
  point P173 (281.8565, -3.5757)
  point P174 (284.9345, -3.2925)
  point P175 (287.8985, -3.018)
  point P176 (290.7464, -2.7525)
  point P177 (293.4746, -2.4963)
  point P178 (296.0807, -2.2503)
  point P179 (298.5617, -2.0142)
  point P180 (300.9152, -1.7892)
  point P181 (303.1388, -1.575)
  point P182 (305.2301, -1.3728)
  point P183 (307.1867, -1.1823)
  point P184 (309.0071, -1.0041)
  point P185 (310.6886, -0.8385)
  point P186 (312.2303, -0.6861)
  point P187 (313.6298, -0.5472)
  point P188 (314.8862, -0.4221)
  point P189 (315.9977, -0.3108)
  point P190 (316.9637, -0.2139)
  point P191 (317.7827, -0.1314)
  point P192 (318.4538, -0.0636)
  point P193 (318.9767, -0.0108)
  point P194 (319.3505, 0.027)
  point P195 (319.5749, 0.0498)
  point P196 (28.0057, 1.0054)
  dimension "d2" = 300.0001
  dimension "d9" = 28
  dimension "d15" = 61
  dimension "d16" = 20.148
  dimension "d18" = 8.4
  dimension "d19" = 110
  dimension "d22" = 100
  dimension "d23" = 7
  dimension "d24" = 5
  dimension "d25" = 5
extrude "Extrusion5" add sketch "Sketch2" along normal blind 11.5 contours L10 L6 L8 L4 L9 L7 L11 S0 picked at (37.3485, 11.0408)
properties part number "3P.04.JS.2414 rib leading edge v2_CPY" material "Polyurethane Foam"
